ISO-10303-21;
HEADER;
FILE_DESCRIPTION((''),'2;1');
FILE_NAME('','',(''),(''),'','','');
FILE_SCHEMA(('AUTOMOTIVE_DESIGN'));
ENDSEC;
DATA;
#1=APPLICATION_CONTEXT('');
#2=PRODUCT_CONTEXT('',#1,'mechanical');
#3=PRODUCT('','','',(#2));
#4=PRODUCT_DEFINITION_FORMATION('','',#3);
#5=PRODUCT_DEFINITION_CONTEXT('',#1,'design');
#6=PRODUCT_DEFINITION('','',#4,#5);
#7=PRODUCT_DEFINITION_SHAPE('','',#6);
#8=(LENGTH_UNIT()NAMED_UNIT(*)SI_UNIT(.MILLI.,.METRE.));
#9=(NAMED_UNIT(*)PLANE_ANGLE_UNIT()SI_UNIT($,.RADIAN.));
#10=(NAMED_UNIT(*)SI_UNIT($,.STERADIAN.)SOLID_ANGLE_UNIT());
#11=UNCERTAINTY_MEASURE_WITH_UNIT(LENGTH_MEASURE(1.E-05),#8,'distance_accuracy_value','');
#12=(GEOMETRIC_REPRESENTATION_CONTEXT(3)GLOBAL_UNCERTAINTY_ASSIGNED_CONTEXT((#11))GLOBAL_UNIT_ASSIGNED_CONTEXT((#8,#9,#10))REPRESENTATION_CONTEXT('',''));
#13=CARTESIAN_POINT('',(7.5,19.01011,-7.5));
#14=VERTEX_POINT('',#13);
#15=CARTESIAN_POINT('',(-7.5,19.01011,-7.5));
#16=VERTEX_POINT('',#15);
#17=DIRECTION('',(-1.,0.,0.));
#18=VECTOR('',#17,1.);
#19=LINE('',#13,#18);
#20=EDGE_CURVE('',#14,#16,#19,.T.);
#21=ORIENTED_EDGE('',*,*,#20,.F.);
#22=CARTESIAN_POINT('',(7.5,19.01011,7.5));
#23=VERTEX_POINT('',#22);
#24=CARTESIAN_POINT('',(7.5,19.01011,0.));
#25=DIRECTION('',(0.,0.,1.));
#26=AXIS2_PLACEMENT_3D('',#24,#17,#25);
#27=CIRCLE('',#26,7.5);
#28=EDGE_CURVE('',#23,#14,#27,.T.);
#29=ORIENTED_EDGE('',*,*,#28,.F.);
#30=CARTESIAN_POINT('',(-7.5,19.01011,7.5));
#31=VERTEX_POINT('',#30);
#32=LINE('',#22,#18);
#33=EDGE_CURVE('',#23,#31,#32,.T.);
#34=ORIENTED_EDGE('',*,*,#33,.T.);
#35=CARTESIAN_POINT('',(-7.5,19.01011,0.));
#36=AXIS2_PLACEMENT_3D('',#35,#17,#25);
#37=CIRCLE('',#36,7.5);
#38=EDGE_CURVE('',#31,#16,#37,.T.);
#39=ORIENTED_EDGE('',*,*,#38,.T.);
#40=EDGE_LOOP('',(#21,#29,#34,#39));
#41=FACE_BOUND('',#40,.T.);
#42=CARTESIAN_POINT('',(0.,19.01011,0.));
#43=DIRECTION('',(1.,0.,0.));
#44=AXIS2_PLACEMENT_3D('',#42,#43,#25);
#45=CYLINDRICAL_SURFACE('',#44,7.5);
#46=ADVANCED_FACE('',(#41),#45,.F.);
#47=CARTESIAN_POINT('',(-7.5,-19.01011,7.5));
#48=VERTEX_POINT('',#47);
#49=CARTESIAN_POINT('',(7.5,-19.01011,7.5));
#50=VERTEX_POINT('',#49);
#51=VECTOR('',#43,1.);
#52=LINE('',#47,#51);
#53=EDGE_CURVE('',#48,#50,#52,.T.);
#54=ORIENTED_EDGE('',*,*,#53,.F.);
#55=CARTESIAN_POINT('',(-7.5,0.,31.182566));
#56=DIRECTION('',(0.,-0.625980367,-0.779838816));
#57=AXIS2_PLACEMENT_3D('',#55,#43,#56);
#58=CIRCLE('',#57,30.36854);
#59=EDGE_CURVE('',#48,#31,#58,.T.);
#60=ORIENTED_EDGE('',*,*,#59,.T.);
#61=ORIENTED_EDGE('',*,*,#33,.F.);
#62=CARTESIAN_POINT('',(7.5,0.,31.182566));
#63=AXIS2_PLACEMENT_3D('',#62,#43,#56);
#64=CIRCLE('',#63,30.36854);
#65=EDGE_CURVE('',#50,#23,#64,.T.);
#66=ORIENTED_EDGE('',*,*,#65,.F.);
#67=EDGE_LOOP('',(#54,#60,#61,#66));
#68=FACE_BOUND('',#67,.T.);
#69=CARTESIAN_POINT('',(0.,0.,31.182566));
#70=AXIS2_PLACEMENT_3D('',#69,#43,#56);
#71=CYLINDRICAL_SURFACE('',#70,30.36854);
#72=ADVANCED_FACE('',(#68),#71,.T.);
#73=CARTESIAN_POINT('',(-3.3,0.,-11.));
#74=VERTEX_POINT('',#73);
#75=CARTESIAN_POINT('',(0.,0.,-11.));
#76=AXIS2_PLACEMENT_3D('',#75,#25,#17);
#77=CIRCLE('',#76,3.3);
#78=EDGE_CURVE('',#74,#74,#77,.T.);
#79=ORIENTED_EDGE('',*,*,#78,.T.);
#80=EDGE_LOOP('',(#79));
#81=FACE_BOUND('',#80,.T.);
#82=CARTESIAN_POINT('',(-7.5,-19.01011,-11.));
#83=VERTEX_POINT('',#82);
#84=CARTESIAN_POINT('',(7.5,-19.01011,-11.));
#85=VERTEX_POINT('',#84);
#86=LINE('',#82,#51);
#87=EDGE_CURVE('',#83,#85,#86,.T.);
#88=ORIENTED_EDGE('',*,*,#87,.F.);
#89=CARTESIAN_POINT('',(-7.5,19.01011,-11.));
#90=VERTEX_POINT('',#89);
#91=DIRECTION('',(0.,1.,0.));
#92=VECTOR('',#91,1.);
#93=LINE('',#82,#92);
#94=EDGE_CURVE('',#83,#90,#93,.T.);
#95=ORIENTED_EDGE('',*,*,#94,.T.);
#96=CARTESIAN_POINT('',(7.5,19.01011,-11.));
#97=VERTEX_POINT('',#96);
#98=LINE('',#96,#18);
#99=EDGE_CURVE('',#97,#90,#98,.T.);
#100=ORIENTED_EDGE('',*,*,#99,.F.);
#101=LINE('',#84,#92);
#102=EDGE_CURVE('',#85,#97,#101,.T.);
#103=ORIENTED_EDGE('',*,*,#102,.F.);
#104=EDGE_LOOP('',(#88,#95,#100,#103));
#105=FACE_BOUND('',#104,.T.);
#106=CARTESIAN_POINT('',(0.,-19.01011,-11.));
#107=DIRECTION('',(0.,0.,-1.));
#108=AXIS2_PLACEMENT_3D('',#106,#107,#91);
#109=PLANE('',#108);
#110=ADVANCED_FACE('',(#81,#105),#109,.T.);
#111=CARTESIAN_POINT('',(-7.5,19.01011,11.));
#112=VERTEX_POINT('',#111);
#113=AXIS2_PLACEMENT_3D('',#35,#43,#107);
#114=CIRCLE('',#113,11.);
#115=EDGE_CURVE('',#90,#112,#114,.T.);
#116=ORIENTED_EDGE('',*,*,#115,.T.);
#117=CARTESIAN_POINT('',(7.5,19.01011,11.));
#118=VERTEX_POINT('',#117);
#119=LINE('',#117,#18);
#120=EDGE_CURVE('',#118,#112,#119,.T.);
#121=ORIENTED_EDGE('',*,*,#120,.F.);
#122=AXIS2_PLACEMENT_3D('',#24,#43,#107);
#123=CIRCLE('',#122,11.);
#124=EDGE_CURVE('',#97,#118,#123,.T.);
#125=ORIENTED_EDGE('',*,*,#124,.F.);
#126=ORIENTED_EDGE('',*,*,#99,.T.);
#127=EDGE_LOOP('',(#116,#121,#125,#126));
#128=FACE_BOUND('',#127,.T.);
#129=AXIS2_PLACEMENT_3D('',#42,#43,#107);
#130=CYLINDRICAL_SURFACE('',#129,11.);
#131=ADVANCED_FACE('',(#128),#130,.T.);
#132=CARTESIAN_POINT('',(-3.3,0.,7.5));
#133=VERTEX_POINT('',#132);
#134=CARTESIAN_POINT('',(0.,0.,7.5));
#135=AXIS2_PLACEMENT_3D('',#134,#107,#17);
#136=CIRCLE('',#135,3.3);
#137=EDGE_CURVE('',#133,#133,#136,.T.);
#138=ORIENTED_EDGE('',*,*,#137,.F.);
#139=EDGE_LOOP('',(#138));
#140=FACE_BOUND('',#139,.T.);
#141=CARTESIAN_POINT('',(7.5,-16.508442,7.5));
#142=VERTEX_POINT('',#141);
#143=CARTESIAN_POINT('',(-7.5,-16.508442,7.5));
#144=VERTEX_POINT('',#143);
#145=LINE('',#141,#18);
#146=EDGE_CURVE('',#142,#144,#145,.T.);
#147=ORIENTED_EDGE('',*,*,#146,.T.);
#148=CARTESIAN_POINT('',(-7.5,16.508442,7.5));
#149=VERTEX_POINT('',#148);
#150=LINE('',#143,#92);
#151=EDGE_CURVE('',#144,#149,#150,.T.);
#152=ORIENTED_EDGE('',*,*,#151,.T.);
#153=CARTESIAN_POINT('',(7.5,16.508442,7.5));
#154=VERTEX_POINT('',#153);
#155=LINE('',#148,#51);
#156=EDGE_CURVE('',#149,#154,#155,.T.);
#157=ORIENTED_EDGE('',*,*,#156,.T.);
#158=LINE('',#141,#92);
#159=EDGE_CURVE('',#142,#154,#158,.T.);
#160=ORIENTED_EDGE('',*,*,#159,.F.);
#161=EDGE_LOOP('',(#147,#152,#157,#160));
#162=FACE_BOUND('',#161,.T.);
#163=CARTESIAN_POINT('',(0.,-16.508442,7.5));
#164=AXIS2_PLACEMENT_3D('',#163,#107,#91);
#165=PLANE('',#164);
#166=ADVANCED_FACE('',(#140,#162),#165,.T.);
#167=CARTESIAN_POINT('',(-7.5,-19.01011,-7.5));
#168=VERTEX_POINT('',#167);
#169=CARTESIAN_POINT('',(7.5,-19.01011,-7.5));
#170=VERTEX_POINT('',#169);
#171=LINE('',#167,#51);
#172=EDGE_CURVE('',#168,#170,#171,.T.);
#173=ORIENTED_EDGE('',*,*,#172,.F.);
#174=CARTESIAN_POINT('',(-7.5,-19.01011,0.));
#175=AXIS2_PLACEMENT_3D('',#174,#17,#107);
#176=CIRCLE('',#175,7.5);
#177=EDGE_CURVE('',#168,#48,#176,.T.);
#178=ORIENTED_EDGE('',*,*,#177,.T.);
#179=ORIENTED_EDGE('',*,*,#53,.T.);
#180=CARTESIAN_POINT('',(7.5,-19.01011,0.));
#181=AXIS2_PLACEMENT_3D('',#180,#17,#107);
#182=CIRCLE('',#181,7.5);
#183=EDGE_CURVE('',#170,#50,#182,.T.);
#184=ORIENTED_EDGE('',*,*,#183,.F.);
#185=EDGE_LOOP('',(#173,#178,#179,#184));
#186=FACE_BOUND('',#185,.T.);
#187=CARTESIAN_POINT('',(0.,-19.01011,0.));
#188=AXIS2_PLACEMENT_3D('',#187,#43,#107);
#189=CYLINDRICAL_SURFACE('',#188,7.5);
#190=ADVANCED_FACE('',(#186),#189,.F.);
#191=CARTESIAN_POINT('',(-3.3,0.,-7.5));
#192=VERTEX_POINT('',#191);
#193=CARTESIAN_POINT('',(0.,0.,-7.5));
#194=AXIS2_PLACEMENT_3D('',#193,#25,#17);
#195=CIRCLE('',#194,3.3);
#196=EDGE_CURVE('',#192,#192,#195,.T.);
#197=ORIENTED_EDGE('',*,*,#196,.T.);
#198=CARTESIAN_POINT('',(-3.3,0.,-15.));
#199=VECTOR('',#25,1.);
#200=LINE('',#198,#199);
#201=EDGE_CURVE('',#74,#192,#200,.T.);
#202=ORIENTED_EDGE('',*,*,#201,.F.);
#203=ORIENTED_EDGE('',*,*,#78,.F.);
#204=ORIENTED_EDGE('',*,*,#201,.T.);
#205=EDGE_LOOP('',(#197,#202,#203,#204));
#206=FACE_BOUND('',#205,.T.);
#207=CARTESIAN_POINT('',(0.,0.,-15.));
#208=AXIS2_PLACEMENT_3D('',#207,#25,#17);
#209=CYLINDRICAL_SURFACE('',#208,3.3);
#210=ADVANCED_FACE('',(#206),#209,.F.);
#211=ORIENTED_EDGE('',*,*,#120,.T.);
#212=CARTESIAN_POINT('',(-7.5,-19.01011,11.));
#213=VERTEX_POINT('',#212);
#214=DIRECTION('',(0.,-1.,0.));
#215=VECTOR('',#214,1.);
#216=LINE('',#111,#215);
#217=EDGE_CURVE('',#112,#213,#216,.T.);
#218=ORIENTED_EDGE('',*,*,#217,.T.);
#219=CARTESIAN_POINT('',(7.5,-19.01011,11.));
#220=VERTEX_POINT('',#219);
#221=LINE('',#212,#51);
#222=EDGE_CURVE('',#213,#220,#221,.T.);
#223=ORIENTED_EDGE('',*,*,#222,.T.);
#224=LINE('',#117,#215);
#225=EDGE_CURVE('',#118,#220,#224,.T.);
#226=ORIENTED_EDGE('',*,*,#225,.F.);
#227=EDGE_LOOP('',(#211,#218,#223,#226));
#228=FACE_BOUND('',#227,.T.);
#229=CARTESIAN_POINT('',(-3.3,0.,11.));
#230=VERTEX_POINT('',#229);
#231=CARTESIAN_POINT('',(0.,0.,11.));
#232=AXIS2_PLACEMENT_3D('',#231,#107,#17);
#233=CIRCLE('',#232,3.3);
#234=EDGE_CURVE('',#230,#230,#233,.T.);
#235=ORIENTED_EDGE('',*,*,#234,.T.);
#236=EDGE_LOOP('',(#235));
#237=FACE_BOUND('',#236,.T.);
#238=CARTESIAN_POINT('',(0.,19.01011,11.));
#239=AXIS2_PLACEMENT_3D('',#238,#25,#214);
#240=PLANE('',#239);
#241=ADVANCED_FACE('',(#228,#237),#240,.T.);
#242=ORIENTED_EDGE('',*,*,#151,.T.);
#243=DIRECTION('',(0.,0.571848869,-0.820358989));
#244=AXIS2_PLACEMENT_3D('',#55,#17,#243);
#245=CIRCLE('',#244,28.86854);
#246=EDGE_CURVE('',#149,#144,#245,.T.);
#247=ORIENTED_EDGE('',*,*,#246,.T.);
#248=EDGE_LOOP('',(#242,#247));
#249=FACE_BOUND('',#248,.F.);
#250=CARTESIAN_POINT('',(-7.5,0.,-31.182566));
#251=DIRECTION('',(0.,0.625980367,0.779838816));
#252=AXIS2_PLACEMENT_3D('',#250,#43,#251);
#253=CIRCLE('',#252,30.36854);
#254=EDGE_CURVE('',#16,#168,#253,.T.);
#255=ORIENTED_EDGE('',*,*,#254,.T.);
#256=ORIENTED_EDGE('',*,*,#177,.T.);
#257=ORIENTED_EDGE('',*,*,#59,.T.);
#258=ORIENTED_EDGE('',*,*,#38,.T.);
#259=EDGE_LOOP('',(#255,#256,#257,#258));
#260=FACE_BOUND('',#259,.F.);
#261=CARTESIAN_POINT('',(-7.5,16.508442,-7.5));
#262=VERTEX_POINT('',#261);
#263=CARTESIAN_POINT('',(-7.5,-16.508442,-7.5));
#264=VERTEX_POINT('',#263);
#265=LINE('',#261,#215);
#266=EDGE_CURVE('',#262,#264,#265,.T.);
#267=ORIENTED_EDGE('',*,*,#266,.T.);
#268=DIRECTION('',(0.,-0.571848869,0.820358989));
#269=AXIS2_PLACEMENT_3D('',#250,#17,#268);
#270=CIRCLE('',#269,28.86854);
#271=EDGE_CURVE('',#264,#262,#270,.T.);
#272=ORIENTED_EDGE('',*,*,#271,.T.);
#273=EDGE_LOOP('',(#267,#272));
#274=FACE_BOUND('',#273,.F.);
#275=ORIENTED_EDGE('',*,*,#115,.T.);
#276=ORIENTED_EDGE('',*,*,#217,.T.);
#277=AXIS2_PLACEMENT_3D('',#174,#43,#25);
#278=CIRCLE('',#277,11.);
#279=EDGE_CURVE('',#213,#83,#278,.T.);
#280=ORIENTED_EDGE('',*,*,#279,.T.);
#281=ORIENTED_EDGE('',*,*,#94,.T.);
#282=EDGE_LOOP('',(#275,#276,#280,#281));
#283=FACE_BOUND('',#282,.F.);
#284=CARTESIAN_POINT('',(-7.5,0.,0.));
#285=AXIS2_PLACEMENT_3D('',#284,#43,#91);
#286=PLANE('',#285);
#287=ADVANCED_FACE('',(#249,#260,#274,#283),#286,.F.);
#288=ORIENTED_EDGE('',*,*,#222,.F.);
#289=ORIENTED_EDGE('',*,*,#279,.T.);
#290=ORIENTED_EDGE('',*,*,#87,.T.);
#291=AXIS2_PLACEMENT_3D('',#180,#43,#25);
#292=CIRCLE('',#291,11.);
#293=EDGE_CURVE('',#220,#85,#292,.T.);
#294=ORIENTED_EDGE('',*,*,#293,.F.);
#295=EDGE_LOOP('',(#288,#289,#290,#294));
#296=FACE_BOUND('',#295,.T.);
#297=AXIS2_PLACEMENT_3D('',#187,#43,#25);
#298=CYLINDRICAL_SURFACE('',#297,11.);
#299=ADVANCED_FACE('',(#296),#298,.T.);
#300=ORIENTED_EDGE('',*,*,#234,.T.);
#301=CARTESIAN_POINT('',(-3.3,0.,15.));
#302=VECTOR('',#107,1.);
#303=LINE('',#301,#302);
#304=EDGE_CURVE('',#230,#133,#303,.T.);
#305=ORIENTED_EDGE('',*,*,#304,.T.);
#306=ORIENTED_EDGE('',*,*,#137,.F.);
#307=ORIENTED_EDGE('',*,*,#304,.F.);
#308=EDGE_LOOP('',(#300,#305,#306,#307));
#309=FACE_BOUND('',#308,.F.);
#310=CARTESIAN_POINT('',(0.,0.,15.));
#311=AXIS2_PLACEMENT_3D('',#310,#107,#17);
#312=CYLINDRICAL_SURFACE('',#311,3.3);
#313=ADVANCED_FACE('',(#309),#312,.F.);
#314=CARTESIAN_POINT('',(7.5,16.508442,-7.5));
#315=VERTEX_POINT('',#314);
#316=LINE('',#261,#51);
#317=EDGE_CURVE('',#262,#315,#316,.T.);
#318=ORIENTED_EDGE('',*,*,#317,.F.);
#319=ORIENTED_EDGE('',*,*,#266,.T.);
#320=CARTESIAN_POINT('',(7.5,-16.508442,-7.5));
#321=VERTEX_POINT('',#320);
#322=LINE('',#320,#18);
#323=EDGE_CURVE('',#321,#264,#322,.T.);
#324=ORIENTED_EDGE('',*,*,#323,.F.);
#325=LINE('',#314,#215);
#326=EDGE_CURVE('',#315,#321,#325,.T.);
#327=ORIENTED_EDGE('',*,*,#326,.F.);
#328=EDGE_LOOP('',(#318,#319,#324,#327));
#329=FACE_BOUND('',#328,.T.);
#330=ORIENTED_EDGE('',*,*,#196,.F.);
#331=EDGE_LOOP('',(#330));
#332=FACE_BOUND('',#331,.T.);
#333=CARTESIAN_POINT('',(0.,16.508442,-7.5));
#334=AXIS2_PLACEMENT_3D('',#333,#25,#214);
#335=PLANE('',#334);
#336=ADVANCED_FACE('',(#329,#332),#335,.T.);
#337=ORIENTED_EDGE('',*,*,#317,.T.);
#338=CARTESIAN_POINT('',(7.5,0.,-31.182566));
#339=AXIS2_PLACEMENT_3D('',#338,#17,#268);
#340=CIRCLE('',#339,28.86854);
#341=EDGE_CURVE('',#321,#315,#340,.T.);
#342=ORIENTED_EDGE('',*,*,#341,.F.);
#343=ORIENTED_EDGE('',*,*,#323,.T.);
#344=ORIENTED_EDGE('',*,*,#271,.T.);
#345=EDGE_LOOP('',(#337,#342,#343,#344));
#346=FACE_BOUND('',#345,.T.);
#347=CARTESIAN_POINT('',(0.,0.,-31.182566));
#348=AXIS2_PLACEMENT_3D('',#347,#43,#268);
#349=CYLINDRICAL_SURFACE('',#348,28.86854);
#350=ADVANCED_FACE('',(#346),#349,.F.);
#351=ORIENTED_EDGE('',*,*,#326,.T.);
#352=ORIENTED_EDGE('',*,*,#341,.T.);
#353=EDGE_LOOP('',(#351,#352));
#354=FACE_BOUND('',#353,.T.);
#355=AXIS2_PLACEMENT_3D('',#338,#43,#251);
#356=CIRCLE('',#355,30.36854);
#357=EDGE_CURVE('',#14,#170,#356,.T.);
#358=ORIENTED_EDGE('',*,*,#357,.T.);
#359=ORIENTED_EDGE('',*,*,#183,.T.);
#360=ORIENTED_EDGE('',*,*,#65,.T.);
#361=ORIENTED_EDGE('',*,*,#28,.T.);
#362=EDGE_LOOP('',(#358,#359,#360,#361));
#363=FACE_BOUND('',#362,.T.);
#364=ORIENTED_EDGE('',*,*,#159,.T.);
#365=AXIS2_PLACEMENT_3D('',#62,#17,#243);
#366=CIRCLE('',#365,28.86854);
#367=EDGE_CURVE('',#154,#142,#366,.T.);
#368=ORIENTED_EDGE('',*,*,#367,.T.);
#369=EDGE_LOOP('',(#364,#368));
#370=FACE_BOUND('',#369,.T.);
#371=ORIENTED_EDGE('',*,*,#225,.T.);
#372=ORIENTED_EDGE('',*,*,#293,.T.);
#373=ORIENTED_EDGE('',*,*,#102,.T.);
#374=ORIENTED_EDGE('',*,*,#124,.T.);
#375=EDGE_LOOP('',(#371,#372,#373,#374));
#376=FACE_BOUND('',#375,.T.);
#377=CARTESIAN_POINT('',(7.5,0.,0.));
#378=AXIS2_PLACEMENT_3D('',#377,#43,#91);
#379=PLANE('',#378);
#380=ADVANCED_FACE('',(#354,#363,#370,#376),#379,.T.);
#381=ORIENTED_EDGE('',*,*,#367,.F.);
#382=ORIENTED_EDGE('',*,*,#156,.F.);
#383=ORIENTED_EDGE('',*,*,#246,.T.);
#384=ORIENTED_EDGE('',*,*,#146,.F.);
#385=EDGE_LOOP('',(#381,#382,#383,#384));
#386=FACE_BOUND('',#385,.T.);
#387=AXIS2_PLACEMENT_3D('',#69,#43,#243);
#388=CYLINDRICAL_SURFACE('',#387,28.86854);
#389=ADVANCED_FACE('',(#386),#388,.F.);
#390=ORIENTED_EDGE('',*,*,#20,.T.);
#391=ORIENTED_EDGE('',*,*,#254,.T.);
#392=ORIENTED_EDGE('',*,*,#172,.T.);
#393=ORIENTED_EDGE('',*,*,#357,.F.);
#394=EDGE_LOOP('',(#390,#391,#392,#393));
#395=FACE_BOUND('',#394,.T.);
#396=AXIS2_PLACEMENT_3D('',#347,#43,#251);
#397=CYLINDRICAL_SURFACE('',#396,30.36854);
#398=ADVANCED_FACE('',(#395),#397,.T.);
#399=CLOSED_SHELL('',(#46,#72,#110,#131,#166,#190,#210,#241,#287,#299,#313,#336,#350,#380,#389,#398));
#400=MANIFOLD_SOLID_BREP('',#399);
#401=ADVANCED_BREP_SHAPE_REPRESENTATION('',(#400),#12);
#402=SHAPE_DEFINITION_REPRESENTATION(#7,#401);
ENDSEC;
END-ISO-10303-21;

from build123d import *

# Parameters (mm, degrees)
F1_DEPTH = 7.5
F3_D     = 6.6
F3_DEPTH = 4
F3_TIP   = 1.9828400428


# Not quite as in the source:
# - a pattern or mirror of a feature is missing from the dataset's text; its kind, count and spacing are read off the source's solid


with BuildPart() as f1:
    # F0 (on Right) → F1 (new body, symmetric)
    with BuildSketch(Plane.YZ):
        with BuildLine():
            Line((19.0101097905, 11), (-19.0101097905, 11))
            ThreePointArc((-19.0101097905, 11), (-30.0101097905, 0), (-19.0101097905, -11))
            Line((-19.0101097905, -11), (19.0101097905, -11))
            ThreePointArc((19.0101097905, -11), (30.0101097905, 0), (19.0101097905, 11))
        make_face()
        with BuildLine():
            Line((16.508441914, -7.5), (-16.508441914, -7.5))
            ThreePointArc((-16.508441914, -7.5), (0, -2.3140263028), (16.508441914, -7.5))
        make_face(mode=Mode.SUBTRACT)
        with BuildLine():
            ThreePointArc((-19.0101097905, -7.5), (-26.5101097905, 0), (-19.0101097905, 7.5))
            ThreePointArc((-19.0101097905, 7.5), (0, 0.8140263028), (19.0101097905, 7.5))
            ThreePointArc((19.0101097905, 7.5), (26.5101097905, 0), (19.0101097905, -7.5))
            ThreePointArc((19.0101097905, -7.5), (0, -0.8140263028), (-19.0101097905, -7.5))
        make_face(mode=Mode.SUBTRACT)
        with BuildLine():
            ThreePointArc((16.508441914, 7.5), (0, 2.3140263028), (-16.508441914, 7.5))
            Line((-16.508441914, 7.5), (16.508441914, 7.5))
        make_face(mode=Mode.SUBTRACT)
    extrude(amount=F1_DEPTH, both=True)

    # F3
    with Locations(Plane.XY.offset(11)):
        with Locations((0, 0)):
            f3 = Hole(F3_D / 2, depth=F3_DEPTH)
            with Locations((0, 0, -(F3_DEPTH + F3_TIP / 2))):  # 118° drill point
                Cone(0, F3_D / 2, F3_TIP, mode=Mode.SUBTRACT)

    # F3_copies: F3 across plane
    add(f3.mirror(Plane(origin=(0, 0, 0), x_dir=(-1, 0, 0), z_dir=(0, 0, -1))), mode=Mode.SUBTRACT)


solid = f1.part
